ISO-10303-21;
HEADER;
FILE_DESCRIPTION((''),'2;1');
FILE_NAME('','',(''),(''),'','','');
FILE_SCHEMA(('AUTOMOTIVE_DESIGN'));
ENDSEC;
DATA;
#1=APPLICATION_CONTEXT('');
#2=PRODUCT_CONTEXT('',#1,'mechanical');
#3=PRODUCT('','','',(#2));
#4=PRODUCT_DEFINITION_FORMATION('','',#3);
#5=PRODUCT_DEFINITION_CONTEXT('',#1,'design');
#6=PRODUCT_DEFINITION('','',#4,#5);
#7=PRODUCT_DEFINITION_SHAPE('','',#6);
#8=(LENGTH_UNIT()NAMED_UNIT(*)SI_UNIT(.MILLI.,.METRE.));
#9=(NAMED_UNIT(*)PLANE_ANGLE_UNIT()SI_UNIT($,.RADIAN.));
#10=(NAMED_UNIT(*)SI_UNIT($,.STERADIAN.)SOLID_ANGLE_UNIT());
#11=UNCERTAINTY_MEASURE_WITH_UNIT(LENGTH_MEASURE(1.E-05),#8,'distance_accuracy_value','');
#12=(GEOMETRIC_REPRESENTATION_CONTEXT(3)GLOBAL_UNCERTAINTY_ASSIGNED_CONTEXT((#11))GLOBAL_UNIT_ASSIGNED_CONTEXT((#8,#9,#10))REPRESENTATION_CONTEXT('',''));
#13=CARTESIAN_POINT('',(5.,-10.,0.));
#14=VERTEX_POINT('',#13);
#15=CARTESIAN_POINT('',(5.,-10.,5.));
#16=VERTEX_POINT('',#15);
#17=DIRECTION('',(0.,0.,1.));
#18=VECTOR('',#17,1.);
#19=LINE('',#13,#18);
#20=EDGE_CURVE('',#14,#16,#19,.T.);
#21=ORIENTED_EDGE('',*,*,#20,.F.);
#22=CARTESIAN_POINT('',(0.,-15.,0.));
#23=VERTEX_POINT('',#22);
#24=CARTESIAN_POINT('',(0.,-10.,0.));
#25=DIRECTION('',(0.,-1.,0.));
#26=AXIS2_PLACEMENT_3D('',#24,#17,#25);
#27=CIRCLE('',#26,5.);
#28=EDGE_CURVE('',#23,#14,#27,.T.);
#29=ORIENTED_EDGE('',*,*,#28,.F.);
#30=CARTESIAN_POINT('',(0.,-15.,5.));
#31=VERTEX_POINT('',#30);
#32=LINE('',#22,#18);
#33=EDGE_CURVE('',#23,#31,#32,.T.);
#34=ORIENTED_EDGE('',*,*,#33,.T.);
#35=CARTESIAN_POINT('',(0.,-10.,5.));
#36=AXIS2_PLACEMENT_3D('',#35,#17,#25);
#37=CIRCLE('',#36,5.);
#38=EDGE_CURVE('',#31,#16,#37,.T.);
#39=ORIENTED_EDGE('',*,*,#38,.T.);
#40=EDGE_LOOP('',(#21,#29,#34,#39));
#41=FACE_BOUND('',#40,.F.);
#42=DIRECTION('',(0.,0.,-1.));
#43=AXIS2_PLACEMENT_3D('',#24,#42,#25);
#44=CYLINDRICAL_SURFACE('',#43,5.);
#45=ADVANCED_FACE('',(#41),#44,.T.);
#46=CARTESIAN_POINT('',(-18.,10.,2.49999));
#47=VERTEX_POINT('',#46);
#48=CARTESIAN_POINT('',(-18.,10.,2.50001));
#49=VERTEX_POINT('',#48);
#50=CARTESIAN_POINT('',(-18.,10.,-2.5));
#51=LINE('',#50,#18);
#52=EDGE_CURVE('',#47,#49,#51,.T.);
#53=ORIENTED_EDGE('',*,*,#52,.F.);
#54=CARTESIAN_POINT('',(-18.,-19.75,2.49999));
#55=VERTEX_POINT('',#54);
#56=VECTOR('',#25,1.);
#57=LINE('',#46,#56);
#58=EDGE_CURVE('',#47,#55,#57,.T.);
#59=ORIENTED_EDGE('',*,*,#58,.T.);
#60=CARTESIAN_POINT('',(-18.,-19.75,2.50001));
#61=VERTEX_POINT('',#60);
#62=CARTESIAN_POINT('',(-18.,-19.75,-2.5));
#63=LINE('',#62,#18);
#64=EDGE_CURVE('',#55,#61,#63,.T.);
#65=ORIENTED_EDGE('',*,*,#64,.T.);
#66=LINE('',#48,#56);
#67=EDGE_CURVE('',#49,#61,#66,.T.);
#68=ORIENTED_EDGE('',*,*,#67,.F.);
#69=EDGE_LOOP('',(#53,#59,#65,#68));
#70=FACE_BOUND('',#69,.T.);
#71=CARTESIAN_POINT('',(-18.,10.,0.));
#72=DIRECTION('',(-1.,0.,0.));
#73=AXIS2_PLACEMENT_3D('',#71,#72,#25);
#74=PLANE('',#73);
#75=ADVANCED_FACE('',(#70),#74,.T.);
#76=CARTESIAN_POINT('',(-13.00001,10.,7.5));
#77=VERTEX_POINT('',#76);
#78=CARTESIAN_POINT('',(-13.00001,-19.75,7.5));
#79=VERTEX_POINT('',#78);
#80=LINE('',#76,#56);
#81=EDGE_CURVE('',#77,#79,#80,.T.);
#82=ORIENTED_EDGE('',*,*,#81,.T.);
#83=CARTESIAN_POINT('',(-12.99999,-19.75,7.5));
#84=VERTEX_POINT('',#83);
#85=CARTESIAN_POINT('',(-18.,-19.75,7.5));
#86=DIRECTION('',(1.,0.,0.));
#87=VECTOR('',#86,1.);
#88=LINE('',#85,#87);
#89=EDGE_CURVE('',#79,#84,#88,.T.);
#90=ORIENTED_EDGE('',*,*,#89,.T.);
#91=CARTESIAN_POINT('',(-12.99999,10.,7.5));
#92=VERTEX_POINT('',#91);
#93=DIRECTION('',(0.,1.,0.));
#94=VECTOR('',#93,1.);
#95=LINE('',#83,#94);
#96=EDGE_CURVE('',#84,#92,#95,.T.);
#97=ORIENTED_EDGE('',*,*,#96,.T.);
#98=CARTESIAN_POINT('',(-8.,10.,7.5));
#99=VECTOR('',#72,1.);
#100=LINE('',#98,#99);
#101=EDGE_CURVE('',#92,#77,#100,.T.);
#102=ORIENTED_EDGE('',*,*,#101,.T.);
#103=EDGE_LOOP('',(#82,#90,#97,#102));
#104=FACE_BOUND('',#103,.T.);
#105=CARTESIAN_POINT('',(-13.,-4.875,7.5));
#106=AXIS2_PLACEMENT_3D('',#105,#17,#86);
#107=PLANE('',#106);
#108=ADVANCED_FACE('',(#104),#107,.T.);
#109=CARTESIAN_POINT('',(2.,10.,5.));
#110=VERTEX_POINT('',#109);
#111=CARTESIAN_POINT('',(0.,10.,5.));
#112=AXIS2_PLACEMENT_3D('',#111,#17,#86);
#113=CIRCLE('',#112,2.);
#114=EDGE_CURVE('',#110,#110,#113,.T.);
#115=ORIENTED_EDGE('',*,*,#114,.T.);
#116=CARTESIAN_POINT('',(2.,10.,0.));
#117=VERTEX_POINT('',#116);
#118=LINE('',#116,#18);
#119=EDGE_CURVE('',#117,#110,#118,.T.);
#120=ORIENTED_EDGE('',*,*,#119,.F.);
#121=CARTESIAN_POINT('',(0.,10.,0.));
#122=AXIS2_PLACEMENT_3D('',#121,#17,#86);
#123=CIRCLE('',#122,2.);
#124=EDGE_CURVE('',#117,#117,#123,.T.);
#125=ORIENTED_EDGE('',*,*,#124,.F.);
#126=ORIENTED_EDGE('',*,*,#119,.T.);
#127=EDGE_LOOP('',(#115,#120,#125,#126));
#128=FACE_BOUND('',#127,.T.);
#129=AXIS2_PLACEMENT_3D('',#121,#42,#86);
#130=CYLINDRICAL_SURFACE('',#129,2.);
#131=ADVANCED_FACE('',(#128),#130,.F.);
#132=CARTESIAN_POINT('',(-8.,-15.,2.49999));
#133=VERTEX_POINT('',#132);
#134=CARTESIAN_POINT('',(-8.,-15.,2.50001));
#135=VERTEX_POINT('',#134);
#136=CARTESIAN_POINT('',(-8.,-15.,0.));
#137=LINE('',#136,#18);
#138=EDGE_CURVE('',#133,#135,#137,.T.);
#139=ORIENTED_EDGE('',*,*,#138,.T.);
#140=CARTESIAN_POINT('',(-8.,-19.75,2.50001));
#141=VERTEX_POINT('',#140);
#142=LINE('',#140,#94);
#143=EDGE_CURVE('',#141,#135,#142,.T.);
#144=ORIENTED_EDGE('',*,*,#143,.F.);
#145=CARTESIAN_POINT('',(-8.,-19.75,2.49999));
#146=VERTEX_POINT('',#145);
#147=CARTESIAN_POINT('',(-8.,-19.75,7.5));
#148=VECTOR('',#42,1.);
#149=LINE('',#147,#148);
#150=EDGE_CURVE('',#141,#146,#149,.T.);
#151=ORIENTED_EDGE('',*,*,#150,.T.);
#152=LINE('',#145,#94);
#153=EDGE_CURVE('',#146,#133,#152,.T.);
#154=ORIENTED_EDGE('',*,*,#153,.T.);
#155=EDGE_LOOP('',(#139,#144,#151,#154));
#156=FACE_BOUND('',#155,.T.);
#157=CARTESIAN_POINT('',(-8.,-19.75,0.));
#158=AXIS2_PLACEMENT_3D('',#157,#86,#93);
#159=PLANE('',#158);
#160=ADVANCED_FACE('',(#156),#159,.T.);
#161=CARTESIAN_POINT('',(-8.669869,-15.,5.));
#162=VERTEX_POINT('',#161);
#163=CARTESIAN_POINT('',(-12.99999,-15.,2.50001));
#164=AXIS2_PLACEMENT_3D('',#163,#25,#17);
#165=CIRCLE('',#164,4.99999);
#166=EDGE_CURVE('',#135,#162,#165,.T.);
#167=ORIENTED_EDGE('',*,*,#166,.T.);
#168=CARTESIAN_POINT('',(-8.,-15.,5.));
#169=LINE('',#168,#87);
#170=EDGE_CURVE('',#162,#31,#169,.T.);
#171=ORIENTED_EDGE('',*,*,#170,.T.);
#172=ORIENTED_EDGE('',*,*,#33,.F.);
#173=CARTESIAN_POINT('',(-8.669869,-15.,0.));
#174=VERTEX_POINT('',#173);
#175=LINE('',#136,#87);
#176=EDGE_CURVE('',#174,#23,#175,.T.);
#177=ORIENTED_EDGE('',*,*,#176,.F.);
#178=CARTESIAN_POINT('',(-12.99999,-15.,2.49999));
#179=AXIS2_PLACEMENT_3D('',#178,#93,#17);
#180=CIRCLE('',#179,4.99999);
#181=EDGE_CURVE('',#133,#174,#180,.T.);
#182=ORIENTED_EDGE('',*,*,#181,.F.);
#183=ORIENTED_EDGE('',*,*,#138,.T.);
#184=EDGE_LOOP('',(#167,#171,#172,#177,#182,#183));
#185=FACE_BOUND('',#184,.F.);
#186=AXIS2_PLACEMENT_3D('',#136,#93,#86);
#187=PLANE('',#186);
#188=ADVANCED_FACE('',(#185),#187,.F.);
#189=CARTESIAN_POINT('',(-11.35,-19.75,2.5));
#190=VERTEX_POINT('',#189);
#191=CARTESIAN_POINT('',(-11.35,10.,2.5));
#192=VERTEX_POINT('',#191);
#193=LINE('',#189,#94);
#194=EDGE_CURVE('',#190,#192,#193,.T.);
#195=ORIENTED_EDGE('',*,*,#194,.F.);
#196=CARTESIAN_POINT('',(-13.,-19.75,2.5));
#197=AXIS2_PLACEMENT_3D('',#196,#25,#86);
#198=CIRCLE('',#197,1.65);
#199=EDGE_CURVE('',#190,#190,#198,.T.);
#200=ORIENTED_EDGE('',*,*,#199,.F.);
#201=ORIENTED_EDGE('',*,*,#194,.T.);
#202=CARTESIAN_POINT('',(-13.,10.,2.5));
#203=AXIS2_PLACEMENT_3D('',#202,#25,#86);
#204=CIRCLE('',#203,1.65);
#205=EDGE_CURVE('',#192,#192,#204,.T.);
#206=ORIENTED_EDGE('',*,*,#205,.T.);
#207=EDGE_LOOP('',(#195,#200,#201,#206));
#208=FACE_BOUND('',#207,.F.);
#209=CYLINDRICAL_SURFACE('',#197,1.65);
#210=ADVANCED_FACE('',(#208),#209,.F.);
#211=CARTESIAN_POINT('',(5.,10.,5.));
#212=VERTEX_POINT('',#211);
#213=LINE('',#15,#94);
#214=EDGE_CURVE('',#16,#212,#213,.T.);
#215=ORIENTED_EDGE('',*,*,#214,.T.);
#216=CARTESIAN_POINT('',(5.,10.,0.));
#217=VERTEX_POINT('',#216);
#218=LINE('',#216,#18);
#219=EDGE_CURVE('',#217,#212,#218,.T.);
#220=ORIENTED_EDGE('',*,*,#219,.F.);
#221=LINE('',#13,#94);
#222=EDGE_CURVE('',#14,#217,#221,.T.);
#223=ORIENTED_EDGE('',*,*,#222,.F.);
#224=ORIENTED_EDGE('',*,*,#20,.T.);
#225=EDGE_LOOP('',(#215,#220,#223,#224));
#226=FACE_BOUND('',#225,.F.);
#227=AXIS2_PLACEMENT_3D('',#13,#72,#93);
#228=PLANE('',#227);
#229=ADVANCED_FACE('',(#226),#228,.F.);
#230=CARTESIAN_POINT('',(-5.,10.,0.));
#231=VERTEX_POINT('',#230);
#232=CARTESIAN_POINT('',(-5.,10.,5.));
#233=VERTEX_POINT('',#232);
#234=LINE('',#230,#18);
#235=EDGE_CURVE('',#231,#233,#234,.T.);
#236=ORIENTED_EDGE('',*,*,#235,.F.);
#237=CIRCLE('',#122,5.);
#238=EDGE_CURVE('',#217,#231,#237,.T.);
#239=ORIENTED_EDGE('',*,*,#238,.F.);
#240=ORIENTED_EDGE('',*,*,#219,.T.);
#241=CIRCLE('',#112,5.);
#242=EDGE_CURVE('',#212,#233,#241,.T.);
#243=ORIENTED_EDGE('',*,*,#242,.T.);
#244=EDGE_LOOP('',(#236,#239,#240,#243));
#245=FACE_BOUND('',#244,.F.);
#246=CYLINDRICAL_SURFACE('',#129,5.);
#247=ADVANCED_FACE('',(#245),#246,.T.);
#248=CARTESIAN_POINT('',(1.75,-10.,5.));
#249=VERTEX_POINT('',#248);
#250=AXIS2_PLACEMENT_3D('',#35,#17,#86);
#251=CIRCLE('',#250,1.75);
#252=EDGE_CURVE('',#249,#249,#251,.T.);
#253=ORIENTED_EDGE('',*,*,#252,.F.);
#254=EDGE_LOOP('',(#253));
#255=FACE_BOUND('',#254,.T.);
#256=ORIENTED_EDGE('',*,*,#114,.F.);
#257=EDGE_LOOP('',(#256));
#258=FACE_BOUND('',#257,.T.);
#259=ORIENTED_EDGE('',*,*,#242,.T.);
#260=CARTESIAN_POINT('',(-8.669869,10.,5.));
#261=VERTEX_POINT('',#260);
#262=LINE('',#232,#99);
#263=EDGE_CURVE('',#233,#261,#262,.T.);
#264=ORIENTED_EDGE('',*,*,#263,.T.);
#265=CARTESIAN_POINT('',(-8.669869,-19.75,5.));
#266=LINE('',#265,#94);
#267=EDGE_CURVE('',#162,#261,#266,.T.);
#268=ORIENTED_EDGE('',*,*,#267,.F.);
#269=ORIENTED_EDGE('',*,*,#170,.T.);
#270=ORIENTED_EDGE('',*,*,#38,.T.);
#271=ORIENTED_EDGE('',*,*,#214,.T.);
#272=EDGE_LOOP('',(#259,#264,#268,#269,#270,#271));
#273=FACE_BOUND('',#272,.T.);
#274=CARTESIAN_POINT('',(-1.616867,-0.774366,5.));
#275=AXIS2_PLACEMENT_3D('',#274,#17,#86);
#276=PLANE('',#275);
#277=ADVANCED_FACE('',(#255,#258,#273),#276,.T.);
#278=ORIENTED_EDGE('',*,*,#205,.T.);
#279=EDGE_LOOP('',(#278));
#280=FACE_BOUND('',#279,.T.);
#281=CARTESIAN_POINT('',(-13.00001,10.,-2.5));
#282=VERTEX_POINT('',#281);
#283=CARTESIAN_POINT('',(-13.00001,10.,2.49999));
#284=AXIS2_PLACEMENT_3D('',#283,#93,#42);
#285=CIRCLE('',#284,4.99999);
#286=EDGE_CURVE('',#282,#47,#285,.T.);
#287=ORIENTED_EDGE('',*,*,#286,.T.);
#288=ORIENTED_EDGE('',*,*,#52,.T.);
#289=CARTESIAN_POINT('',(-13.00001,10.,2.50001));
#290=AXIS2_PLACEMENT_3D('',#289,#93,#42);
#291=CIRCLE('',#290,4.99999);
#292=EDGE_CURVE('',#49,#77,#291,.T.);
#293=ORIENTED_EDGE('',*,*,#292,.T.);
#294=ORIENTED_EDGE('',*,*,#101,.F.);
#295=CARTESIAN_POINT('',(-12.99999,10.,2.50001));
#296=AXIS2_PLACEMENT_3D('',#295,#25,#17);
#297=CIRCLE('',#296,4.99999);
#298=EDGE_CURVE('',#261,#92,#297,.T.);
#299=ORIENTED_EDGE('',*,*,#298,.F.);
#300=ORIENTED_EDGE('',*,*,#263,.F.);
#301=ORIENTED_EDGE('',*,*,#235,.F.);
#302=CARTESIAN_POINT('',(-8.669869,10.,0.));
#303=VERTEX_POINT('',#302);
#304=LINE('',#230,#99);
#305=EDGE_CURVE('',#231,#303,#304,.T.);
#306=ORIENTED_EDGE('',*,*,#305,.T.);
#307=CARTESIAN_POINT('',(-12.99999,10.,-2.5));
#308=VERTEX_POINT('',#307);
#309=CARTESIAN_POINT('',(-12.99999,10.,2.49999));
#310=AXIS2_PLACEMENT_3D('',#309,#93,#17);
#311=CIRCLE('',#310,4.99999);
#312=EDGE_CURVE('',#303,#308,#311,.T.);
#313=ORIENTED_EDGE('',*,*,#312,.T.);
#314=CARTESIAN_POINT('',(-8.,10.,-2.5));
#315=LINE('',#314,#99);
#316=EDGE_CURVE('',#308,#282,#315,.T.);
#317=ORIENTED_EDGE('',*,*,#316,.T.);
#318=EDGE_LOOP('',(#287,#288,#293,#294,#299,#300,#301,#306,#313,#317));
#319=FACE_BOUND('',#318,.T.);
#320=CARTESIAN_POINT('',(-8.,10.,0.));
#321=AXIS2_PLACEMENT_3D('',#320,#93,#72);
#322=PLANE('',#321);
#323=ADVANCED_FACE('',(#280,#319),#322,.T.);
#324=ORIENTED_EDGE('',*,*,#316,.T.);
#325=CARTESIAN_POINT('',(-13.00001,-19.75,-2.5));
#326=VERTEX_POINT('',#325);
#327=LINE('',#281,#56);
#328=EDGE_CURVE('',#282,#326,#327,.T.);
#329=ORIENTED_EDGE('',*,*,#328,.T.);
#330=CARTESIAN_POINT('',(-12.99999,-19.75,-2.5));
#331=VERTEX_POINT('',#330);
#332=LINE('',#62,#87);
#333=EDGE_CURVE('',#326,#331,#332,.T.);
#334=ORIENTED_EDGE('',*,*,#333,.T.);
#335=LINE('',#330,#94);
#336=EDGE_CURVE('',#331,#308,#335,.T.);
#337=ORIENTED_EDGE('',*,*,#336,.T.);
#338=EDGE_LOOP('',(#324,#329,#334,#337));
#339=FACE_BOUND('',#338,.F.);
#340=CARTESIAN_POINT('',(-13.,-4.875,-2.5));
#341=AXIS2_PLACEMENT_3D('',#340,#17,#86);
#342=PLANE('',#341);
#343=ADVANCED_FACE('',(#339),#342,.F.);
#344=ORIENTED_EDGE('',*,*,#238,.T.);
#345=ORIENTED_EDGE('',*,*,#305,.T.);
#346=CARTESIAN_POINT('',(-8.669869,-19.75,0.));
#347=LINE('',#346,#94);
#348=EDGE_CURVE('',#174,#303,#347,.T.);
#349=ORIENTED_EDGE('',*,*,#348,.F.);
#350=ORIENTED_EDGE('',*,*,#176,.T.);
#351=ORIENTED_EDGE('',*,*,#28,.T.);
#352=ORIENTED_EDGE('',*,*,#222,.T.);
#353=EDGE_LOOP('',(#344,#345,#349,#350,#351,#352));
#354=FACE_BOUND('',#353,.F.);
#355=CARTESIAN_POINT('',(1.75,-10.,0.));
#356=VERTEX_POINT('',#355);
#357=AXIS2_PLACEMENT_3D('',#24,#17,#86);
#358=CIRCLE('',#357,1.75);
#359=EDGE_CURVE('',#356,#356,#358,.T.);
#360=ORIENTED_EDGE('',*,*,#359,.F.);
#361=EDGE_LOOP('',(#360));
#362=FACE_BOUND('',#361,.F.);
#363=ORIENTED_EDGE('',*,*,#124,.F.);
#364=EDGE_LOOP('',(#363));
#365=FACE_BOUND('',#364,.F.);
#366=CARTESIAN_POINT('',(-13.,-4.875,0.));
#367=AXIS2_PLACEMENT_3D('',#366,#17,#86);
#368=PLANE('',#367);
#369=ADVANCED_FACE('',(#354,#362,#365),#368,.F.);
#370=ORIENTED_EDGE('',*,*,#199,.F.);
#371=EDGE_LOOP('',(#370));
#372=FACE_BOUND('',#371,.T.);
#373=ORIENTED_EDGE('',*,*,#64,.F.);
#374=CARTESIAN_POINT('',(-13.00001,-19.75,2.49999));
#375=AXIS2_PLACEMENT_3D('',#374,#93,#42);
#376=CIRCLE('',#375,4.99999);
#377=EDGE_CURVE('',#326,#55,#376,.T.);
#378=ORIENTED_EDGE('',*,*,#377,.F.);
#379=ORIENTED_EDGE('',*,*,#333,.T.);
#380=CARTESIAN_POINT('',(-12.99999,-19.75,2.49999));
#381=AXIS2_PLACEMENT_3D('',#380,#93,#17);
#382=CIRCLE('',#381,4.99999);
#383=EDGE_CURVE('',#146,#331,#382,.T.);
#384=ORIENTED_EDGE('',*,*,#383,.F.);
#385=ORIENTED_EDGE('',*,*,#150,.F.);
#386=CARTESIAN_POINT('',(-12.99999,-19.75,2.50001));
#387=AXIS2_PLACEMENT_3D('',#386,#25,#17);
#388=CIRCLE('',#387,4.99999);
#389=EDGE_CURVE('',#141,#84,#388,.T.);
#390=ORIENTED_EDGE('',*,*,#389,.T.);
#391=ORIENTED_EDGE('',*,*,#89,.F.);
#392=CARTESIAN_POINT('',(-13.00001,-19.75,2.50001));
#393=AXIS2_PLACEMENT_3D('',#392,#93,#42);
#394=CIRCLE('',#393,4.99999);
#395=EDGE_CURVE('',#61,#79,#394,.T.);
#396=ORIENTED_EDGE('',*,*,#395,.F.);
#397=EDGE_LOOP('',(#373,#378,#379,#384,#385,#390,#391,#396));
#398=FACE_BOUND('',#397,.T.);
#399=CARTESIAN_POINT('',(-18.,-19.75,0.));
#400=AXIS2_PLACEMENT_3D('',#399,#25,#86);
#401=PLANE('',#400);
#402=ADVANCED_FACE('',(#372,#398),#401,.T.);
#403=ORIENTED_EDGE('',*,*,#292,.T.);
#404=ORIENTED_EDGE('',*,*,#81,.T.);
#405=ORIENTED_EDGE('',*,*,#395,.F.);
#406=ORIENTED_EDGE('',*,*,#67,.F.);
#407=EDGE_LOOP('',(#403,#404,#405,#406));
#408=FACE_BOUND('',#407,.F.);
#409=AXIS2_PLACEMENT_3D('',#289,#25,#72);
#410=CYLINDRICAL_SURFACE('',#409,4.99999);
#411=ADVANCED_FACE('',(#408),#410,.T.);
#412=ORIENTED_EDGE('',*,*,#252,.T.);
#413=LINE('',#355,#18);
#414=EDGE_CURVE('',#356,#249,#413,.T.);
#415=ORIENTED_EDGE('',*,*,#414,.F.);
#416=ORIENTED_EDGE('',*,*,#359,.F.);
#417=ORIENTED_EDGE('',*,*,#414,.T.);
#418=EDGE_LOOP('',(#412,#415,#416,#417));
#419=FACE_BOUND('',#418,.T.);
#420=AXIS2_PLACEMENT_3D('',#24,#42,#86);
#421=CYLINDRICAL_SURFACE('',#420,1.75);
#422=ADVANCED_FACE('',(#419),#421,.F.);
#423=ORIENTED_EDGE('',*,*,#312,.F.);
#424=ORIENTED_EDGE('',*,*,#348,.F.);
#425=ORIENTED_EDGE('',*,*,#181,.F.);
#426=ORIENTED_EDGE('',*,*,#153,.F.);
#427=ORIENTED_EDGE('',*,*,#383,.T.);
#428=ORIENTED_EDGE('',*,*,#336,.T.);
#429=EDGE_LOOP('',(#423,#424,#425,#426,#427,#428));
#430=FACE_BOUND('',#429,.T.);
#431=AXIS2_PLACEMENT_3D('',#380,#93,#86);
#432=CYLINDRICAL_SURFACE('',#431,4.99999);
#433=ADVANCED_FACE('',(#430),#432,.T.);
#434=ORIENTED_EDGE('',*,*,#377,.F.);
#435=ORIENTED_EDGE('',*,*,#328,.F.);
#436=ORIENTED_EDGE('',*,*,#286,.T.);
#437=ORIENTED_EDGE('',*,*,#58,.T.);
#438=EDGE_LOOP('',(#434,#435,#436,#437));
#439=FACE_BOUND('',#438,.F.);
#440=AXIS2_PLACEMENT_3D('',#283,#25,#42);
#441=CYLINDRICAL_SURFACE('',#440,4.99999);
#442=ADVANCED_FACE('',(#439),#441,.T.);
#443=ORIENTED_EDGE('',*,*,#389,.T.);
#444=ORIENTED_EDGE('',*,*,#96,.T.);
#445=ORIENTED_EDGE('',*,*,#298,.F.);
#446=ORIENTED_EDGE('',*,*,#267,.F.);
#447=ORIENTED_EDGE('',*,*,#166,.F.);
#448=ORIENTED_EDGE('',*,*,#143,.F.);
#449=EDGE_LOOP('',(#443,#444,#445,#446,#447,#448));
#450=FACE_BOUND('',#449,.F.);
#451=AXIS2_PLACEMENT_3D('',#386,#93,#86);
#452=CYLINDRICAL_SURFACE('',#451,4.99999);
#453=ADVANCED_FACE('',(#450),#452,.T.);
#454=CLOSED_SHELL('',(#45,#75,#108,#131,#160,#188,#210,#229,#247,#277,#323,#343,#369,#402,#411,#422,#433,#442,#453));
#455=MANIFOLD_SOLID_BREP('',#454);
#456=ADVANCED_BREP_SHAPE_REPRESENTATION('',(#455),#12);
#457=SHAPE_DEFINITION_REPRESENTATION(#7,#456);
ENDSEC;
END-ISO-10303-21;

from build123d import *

# Parameters (mm, degrees)
F0_R     = 1.75
F0_R_2   = 2
F1_DEPTH = 5
F2_DEPTH = 7.5
F3_DEPTH = 2.5
F4_R     = 1.65
F5_DEPTH = 29.75
F6_R     = 4.99999


# Not quite as in the source:
# - a fillet or chamfer is up to 0.001 mm smaller than in the source, because OpenCascade refuses the exact size


with BuildPart() as f1:
    # F0 (on Top) → F1 (new body)
    with BuildSketch(Plane.XY):
        with BuildLine():
            Line((-5, 10), (-8, 10))
            Line((-8, 10), (-8, -15))
            Line((-8, -15), (0, -15))
            ThreePointArc((0, -15), (3.5355339059, -13.5355339059), (5, -10))
            Line((5, -10), (5, 10))
            ThreePointArc((5, 10), (0, 15), (-5, 10))
        make_face()
        with Locations((0, -10)):
            Circle(F0_R, mode=Mode.SUBTRACT)
        with Locations((0, 10)):
            Circle(F0_R_2, mode=Mode.SUBTRACT)
    extrude(amount=F1_DEPTH)

    # F0 (on Top) → F2 (join)
    with BuildSketch(Plane.XY):
        Polygon((-8, 10), (-18, 10), (-18, -19.75), (-8, -19.75), (-8, -15), align=None)
    extrude(amount=F2_DEPTH)

    # F0 (on Top) → F3 (join)
    with BuildSketch(Plane.XY):
        Polygon((-8, 10), (-18, 10), (-18, -19.75), (-8, -19.75), (-8, -15), align=None)
    extrude(amount=-F3_DEPTH)

    # F4 (on face) → F5 (cut, through all)
    with BuildSketch(Plane.XZ.offset(19.75)):
        with Locations((-13, 2.5)):
            Circle(F4_R)
    extrude(amount=-F5_DEPTH, mode=Mode.SUBTRACT)

    # F6 (radius 5 in the source; OpenCascade refuses exactly that, so slightly less here)
    f6_edges = [f1.edges().sort_by_distance(p)[0] for p in [
        (-18, -4.875, 7.5),
        (-18, -4.875, -2.5),
        (-8, -4.875, 7.5),
        (-8, -4.875, -2.5),
    ]]
    fillet(f6_edges, radius=F6_R)


solid = f1.part
